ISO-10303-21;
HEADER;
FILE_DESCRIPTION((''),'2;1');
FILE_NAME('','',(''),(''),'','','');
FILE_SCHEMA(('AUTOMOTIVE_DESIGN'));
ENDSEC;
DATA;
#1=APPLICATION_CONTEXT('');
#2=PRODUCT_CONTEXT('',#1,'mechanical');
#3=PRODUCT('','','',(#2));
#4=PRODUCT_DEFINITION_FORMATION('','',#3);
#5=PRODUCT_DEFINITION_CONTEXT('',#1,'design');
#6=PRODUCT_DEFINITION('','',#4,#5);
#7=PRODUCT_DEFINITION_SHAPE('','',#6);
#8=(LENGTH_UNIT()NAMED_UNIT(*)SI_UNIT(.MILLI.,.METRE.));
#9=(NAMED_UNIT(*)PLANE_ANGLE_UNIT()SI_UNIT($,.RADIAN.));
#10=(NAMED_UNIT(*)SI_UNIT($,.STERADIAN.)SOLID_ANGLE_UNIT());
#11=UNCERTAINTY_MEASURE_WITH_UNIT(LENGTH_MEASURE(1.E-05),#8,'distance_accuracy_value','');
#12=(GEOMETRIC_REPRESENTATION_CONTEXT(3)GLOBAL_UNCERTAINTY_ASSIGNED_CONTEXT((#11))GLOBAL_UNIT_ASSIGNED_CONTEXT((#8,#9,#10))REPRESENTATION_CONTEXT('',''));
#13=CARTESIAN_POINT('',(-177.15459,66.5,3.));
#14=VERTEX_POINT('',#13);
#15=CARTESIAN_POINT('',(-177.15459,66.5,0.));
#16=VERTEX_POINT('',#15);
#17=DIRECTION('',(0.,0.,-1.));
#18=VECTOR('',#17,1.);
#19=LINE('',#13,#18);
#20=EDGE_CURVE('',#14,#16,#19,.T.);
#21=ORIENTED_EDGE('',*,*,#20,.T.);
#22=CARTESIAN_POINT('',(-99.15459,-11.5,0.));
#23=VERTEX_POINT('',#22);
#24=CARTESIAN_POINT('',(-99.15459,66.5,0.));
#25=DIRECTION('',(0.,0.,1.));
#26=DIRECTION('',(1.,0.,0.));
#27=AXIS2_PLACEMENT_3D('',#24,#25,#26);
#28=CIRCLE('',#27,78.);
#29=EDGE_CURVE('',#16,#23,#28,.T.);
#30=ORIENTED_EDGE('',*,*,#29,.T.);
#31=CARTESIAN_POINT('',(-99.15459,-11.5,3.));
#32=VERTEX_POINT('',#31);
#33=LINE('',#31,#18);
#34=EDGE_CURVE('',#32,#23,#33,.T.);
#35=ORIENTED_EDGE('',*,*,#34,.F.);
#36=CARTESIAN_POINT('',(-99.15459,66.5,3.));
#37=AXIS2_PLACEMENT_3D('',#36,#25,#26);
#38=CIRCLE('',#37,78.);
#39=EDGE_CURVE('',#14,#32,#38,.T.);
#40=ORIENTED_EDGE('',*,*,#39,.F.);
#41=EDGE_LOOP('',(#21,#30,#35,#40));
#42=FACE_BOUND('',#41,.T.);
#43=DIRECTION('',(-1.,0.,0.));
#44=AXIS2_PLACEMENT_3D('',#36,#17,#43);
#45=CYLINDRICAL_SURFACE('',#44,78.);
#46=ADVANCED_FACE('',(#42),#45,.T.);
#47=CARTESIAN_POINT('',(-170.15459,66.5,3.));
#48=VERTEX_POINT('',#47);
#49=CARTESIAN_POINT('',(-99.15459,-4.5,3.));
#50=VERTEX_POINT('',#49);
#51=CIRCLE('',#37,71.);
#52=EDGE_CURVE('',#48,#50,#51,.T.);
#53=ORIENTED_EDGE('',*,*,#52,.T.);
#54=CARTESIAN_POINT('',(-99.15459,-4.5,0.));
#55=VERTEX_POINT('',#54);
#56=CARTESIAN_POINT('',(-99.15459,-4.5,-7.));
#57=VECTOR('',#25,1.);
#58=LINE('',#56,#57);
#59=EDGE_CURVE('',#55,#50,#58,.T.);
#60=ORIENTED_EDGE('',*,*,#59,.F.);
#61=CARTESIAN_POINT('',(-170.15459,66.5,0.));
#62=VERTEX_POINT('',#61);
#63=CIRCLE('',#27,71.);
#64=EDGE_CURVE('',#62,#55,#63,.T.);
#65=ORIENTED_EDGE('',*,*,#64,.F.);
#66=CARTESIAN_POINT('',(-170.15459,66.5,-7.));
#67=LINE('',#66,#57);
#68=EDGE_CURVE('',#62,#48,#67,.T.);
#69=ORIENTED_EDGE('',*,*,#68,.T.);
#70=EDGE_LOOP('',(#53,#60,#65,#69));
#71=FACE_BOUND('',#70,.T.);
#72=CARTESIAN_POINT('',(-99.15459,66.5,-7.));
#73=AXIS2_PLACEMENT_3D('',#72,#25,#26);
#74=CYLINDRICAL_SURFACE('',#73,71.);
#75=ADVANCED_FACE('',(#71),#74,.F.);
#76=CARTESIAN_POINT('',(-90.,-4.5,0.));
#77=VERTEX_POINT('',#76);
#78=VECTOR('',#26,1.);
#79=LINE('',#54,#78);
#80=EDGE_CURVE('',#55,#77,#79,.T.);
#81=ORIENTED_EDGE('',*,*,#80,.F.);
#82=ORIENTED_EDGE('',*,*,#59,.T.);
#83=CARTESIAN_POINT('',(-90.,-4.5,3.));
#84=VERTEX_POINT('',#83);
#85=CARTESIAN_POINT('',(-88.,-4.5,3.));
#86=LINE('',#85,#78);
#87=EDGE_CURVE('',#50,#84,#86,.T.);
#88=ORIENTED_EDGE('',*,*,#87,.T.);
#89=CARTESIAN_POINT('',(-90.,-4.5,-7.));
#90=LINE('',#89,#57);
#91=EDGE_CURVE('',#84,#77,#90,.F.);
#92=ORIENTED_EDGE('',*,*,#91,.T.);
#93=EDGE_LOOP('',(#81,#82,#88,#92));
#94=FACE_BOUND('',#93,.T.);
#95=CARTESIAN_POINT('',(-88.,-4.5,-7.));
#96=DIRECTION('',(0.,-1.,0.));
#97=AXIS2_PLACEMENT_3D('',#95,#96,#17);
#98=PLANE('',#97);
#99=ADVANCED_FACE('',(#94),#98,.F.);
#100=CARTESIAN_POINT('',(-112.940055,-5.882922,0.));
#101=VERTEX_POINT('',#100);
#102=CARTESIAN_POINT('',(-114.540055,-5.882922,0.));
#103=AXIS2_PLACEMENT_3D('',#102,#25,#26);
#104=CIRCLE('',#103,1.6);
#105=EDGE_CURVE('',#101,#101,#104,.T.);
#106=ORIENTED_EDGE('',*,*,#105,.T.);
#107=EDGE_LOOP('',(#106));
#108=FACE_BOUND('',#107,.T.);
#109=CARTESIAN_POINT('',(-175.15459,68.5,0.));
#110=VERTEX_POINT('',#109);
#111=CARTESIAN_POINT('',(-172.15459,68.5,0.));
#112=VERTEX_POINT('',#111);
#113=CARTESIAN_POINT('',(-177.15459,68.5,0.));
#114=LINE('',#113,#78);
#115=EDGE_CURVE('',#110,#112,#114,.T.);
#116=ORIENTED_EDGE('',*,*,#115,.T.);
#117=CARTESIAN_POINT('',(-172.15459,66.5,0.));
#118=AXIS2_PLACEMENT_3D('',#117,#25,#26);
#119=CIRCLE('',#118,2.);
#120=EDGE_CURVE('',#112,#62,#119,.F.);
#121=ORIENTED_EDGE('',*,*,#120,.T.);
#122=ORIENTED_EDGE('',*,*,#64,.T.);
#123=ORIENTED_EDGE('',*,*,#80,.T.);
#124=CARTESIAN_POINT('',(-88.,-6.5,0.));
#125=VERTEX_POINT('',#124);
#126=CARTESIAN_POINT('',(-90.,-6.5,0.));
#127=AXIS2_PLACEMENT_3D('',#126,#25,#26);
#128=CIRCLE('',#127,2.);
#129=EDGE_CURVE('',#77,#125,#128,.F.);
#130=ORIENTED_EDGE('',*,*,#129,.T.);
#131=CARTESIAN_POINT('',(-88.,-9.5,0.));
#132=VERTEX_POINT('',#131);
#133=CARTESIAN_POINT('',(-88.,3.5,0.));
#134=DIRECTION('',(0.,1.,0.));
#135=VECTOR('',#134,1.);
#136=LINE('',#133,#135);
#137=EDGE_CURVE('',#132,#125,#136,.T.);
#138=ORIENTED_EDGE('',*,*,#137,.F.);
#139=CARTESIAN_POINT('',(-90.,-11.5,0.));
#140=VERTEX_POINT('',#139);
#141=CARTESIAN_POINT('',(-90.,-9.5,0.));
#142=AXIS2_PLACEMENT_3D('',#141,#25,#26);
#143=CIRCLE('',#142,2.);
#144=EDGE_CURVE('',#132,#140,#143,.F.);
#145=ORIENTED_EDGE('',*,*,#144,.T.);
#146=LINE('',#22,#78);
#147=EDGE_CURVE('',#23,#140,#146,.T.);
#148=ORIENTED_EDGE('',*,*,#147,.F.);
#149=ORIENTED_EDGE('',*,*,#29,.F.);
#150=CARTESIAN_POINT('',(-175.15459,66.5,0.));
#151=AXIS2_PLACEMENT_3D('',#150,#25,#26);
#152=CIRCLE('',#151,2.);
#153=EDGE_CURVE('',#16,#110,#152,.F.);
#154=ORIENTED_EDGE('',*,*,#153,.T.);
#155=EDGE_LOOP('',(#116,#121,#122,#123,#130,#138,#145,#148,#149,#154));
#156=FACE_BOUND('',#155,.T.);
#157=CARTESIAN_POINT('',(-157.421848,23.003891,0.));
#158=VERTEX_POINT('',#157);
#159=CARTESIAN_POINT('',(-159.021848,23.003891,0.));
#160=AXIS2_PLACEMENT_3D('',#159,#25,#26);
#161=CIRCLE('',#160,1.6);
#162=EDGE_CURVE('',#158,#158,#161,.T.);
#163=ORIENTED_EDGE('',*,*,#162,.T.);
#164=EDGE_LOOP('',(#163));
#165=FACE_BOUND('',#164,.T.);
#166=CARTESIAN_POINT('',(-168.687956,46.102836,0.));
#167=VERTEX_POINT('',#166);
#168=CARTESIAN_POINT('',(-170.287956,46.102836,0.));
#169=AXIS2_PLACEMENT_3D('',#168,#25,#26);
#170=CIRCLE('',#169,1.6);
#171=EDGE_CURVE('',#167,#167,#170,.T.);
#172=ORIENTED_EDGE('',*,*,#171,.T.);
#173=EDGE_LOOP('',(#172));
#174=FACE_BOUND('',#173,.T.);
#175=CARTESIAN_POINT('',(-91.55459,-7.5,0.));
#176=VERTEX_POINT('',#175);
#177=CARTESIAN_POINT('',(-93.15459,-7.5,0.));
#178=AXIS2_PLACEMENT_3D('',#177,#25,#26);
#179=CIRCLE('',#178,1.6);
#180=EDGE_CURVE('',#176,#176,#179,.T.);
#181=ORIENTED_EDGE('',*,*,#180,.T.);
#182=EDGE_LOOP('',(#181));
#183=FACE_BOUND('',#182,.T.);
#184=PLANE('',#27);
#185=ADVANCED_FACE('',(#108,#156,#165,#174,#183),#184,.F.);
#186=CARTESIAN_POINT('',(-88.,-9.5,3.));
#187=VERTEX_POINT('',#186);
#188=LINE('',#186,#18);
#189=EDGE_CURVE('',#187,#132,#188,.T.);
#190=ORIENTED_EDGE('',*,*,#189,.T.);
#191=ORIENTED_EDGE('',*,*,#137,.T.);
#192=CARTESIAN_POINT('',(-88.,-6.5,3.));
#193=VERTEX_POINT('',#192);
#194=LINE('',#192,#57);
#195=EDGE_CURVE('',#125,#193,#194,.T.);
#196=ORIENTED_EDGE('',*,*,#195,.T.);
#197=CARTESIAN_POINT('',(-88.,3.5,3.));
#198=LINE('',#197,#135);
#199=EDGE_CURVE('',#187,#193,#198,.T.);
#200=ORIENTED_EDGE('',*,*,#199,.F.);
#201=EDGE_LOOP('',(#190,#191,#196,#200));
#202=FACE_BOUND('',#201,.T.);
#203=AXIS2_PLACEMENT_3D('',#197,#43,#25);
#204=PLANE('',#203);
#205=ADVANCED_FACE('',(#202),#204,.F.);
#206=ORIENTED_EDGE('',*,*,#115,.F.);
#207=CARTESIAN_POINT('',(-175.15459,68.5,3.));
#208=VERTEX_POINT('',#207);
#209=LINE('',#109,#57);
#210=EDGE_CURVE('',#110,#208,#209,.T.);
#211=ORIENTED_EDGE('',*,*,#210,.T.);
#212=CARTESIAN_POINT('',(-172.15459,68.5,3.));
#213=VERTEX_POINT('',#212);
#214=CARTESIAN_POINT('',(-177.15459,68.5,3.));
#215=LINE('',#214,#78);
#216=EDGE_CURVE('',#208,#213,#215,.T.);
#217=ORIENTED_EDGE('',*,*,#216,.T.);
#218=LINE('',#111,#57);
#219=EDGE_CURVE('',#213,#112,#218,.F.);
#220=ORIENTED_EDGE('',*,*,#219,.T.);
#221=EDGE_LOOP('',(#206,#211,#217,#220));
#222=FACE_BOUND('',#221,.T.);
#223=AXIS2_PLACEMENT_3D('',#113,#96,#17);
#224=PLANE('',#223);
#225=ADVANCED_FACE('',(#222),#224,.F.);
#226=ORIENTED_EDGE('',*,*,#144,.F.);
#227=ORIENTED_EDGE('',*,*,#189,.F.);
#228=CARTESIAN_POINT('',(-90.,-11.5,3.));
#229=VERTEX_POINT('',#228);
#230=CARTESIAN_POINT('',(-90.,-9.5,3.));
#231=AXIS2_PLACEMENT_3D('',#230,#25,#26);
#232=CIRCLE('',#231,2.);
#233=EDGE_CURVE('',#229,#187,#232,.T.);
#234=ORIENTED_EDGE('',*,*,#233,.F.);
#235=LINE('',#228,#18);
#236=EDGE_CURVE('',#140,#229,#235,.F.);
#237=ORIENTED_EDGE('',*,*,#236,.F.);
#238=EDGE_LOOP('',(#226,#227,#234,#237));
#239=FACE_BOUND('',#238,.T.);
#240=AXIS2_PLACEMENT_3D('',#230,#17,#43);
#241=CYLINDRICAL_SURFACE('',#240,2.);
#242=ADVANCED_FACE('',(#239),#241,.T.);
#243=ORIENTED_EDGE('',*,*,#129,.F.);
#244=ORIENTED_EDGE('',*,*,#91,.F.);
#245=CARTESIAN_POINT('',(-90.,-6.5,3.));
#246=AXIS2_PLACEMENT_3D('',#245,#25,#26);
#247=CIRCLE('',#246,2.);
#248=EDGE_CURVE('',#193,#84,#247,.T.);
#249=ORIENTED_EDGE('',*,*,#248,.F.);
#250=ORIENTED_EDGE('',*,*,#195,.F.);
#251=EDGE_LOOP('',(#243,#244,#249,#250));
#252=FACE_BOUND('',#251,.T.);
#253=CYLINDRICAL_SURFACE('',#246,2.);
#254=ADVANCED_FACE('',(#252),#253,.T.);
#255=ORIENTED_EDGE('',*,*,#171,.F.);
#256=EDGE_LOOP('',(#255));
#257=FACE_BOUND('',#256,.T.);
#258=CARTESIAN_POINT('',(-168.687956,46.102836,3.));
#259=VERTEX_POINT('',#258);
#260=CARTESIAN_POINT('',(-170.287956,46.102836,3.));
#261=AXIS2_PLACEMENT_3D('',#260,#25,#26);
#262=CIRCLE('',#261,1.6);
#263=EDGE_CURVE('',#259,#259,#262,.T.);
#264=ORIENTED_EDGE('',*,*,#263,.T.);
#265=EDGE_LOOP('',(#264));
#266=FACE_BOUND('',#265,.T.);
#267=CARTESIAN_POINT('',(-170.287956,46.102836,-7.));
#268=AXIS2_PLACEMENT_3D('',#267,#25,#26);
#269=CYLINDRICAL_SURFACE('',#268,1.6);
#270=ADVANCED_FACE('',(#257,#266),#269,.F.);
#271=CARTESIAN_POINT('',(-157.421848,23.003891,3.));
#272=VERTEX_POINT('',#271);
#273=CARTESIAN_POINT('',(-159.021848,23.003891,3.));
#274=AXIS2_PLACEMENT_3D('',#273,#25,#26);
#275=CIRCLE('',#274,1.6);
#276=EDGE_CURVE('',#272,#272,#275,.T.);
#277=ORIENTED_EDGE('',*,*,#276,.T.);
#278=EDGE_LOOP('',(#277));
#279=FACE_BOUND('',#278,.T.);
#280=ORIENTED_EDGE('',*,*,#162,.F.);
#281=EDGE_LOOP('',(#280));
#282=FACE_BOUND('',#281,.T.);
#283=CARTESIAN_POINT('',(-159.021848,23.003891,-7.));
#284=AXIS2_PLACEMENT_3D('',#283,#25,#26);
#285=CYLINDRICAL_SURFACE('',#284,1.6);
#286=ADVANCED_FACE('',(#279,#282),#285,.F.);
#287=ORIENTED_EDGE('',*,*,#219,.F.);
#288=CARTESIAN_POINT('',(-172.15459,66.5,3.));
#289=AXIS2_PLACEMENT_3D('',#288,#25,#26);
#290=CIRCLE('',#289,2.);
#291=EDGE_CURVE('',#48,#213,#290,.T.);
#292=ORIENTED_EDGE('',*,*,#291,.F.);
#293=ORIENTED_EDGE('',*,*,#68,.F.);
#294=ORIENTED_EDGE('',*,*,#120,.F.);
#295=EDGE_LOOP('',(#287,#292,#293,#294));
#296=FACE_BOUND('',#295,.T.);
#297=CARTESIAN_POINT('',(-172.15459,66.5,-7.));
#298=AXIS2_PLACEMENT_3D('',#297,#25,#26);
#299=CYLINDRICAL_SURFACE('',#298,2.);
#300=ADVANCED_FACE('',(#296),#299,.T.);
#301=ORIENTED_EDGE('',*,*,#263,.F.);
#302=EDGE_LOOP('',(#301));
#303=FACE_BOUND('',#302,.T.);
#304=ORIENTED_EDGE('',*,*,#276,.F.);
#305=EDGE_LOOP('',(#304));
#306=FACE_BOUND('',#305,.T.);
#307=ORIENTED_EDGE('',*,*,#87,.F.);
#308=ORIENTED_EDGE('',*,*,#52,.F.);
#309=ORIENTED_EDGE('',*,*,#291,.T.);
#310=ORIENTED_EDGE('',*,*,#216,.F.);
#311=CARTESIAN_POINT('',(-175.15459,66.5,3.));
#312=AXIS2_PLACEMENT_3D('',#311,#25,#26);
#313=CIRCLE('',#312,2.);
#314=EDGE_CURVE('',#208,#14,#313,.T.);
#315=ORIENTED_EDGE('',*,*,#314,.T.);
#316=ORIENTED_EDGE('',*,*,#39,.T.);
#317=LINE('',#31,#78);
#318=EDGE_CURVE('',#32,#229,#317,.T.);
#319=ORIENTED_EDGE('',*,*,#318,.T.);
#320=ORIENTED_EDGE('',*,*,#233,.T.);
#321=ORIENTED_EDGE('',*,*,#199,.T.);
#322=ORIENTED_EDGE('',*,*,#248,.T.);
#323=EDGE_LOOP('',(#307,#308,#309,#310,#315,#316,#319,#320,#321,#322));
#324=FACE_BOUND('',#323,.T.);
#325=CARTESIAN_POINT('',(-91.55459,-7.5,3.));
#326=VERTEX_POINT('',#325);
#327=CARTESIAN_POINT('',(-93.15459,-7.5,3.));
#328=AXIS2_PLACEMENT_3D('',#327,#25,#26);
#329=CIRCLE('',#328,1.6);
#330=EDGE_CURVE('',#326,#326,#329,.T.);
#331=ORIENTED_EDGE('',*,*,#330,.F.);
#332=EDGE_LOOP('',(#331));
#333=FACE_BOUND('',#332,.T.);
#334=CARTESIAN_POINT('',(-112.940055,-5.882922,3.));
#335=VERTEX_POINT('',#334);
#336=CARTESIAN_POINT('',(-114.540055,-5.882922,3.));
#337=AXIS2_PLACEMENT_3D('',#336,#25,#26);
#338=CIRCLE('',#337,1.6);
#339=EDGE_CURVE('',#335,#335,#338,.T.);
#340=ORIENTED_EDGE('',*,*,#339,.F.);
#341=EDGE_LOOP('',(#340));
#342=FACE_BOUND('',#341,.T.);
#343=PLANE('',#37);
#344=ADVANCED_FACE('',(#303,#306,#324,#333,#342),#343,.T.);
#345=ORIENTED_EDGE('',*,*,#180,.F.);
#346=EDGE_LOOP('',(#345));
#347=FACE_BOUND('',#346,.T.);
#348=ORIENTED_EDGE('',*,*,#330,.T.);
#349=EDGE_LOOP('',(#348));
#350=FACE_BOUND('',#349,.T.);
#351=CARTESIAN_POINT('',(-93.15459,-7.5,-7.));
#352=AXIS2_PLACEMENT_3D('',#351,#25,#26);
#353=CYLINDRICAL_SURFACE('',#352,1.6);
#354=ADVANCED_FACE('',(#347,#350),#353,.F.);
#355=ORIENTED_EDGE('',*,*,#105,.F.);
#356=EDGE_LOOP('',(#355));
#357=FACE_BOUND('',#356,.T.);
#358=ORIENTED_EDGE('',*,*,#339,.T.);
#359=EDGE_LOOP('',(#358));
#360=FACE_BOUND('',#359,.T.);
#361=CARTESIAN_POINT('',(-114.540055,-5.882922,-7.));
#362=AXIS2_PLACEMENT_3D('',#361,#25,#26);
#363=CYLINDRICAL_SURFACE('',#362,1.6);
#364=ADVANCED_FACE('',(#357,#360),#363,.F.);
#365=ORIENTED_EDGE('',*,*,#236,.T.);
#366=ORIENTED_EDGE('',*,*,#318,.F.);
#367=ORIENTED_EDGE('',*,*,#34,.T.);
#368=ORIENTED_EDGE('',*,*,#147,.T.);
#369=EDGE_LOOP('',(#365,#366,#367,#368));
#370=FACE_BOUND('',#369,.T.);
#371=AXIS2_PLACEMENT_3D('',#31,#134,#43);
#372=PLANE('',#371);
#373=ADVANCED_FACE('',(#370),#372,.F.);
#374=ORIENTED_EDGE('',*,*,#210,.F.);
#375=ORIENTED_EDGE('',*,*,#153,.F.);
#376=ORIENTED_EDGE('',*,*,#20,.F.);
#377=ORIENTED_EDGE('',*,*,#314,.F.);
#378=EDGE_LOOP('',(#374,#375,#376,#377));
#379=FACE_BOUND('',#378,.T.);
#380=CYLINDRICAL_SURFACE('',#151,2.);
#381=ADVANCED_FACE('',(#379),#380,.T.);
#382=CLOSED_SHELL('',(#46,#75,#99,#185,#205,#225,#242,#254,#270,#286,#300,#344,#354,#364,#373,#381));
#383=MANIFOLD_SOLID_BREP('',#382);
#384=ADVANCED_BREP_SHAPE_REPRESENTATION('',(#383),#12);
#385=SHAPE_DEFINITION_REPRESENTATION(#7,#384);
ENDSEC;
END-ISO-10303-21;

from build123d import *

# Parameters (mm, degrees)
SKETCH_2_R          = 1.6
EXTRUDE_1_DEPTH     = 3
SKETCH_4_W          = 6.5
SKETCH_4_H          = 8
CUT_EXTRUDE_1_DEPTH = 3
SKETCH_6_R          = 1.6
CUT_EXTRUDE_2_DEPTH = 10
CUT_EXTRUDE_START   = -10
CUT_EXTRUDE_3_DEPTH = 10
FILLET_1_R          = 2


with BuildPart() as part:
    # 草图2 → 凸台-拉伸1 (new body)
    with BuildSketch(Plane.XY):
        with BuildLine():
            Line((-162.154590294, 76.5), (-162.154590294, 66.5))
            ThreePointArc((-162.154590294, 66.5), (-143.702317509, 21.952272785), (-99.154590294, 3.5))
            Line((-99.154590294, 3.5), (-88, 3.5))
            Line((-88, 3.5), (-88, -11.5))
            Line((-88, -11.5), (-99.154590294, -11.5))
            ThreePointArc((-99.154590294, -11.5), (-154.308919227, 11.345671067), (-177.154590294, 66.5))
            Line((-177.154590294, 66.5), (-177.154590294, 76.5))
            Line((-177.154590294, 76.5), (-162.154590294, 76.5))
        make_face()
        with Locations((-91.754590294, 1)):
            Circle(SKETCH_2_R, mode=Mode.SUBTRACT)
        with Locations((-99.154590294, 1)):
            Circle(SKETCH_2_R, mode=Mode.SUBTRACT)
        with Locations((-106.910050218, 1.460759219)):
            Circle(SKETCH_2_R, mode=Mode.SUBTRACT)
        with Locations((-114.556398703, 2.836554462)):
            Circle(SKETCH_2_R, mode=Mode.SUBTRACT)
        with Locations((-121.986059394, 5.108029688)):
            Circle(SKETCH_2_R, mode=Mode.SUBTRACT)
        with Locations((-129.094504517, 8.243227549)):
            Circle(SKETCH_2_R, mode=Mode.SUBTRACT)
        with Locations((-135.781725472, 12.198038998)):
            Circle(SKETCH_2_R, mode=Mode.SUBTRACT)
        with Locations((-141.953639856, 16.916823855)):
            Circle(SKETCH_2_R, mode=Mode.SUBTRACT)
        with Locations((-147.523415105, 22.333193613)):
            Circle(SKETCH_2_R, mode=Mode.SUBTRACT)
        with Locations((-152.412690143, 28.370945455)):
            Circle(SKETCH_2_R, mode=Mode.SUBTRACT)
        with Locations((-156.552677837, 34.945134346)):
            Circle(SKETCH_2_R, mode=Mode.SUBTRACT)
        with Locations((-159.885132769, 41.963268131)):
            Circle(SKETCH_2_R, mode=Mode.SUBTRACT)
        with Locations((-162.363170682, 49.326608799)):
            Circle(SKETCH_2_R, mode=Mode.SUBTRACT)
        with Locations((-163.951928103, 56.931561629)):
            Circle(SKETCH_2_R, mode=Mode.SUBTRACT)
        with Locations((-164.62905283, 64.671132664)):
            Circle(SKETCH_2_R, mode=Mode.SUBTRACT)
        with Locations((-164.654590294, 72.371090315)):
            Circle(SKETCH_2_R, mode=Mode.SUBTRACT)
    extrude(amount=EXTRUDE_1_DEPTH)

    # 草图4 → 切除-拉伸1 (cut)
    with BuildSketch(Plane.XY.offset(3)):
        with Locations((-173.904590294, 72.5)):
            Rectangle(SKETCH_4_W, SKETCH_4_H)
    extrude(amount=-CUT_EXTRUDE_1_DEPTH, mode=Mode.SUBTRACT)

    # 草图6 → 切除-拉伸2 (cut)
    with BuildSketch(Plane.XY.offset(3)):
        with Locations((-170.287955794, 46.10283567)):
            Circle(SKETCH_6_R)
        with Locations((-159.021847878, 23.00389133)):
            Circle(SKETCH_6_R)
        with Locations((-114.540055415, -5.882922454)):
            Circle(SKETCH_6_R)
        with Locations((-93.154590294, -7.5)):
            Circle(SKETCH_6_R)
    extrude(amount=-CUT_EXTRUDE_2_DEPTH, mode=Mode.SUBTRACT)

    # 草图8 → 切除-拉伸3 (cut)
    with BuildSketch(Plane.XY.offset(3).offset(CUT_EXTRUDE_START)):
        with BuildLine():
            Line((-88, 3.5), (-99.154590294, 3.5))
            ThreePointArc((-99.154590294, 3.5), (-143.702317509, 21.952272785), (-162.154590294, 66.5))
            Line((-162.154590294, 66.5), (-162.154590294, 76.5))
            Line((-162.154590294, 76.5), (-170.654590294, 76.5))
            Line((-170.654590294, 76.5), (-170.654590294, 68.5))
            Line((-170.654590294, 68.5), (-170.154590294, 68.5))
            Line((-170.154590294, 68.5), (-170.154590294, 66.5))
            ThreePointArc((-170.154590294, 66.5), (-149.359171759, 16.295418536), (-99.154590294, -4.5))
            Line((-99.154590294, -4.5), (-88, -4.5))
            Line((-88, -4.5), (-88, 3.5))
        make_face()
    extrude(amount=CUT_EXTRUDE_3_DEPTH, mode=Mode.SUBTRACT)

    # 圆角1
    fillet_1_edges = [part.edges().sort_by_distance(p)[0] for p in [
        (-177.154590294, 68.5, 1.5),
        (-88, -11.5, 1.5),
        (-88, -4.5, 1.5),
        (-170.154590294, 68.5, 1.5),
    ]]
    fillet(fillet_1_edges, radius=FILLET_1_R - 0.0001)  # a hair under: the kernel refuses the full size


solid = part.part
